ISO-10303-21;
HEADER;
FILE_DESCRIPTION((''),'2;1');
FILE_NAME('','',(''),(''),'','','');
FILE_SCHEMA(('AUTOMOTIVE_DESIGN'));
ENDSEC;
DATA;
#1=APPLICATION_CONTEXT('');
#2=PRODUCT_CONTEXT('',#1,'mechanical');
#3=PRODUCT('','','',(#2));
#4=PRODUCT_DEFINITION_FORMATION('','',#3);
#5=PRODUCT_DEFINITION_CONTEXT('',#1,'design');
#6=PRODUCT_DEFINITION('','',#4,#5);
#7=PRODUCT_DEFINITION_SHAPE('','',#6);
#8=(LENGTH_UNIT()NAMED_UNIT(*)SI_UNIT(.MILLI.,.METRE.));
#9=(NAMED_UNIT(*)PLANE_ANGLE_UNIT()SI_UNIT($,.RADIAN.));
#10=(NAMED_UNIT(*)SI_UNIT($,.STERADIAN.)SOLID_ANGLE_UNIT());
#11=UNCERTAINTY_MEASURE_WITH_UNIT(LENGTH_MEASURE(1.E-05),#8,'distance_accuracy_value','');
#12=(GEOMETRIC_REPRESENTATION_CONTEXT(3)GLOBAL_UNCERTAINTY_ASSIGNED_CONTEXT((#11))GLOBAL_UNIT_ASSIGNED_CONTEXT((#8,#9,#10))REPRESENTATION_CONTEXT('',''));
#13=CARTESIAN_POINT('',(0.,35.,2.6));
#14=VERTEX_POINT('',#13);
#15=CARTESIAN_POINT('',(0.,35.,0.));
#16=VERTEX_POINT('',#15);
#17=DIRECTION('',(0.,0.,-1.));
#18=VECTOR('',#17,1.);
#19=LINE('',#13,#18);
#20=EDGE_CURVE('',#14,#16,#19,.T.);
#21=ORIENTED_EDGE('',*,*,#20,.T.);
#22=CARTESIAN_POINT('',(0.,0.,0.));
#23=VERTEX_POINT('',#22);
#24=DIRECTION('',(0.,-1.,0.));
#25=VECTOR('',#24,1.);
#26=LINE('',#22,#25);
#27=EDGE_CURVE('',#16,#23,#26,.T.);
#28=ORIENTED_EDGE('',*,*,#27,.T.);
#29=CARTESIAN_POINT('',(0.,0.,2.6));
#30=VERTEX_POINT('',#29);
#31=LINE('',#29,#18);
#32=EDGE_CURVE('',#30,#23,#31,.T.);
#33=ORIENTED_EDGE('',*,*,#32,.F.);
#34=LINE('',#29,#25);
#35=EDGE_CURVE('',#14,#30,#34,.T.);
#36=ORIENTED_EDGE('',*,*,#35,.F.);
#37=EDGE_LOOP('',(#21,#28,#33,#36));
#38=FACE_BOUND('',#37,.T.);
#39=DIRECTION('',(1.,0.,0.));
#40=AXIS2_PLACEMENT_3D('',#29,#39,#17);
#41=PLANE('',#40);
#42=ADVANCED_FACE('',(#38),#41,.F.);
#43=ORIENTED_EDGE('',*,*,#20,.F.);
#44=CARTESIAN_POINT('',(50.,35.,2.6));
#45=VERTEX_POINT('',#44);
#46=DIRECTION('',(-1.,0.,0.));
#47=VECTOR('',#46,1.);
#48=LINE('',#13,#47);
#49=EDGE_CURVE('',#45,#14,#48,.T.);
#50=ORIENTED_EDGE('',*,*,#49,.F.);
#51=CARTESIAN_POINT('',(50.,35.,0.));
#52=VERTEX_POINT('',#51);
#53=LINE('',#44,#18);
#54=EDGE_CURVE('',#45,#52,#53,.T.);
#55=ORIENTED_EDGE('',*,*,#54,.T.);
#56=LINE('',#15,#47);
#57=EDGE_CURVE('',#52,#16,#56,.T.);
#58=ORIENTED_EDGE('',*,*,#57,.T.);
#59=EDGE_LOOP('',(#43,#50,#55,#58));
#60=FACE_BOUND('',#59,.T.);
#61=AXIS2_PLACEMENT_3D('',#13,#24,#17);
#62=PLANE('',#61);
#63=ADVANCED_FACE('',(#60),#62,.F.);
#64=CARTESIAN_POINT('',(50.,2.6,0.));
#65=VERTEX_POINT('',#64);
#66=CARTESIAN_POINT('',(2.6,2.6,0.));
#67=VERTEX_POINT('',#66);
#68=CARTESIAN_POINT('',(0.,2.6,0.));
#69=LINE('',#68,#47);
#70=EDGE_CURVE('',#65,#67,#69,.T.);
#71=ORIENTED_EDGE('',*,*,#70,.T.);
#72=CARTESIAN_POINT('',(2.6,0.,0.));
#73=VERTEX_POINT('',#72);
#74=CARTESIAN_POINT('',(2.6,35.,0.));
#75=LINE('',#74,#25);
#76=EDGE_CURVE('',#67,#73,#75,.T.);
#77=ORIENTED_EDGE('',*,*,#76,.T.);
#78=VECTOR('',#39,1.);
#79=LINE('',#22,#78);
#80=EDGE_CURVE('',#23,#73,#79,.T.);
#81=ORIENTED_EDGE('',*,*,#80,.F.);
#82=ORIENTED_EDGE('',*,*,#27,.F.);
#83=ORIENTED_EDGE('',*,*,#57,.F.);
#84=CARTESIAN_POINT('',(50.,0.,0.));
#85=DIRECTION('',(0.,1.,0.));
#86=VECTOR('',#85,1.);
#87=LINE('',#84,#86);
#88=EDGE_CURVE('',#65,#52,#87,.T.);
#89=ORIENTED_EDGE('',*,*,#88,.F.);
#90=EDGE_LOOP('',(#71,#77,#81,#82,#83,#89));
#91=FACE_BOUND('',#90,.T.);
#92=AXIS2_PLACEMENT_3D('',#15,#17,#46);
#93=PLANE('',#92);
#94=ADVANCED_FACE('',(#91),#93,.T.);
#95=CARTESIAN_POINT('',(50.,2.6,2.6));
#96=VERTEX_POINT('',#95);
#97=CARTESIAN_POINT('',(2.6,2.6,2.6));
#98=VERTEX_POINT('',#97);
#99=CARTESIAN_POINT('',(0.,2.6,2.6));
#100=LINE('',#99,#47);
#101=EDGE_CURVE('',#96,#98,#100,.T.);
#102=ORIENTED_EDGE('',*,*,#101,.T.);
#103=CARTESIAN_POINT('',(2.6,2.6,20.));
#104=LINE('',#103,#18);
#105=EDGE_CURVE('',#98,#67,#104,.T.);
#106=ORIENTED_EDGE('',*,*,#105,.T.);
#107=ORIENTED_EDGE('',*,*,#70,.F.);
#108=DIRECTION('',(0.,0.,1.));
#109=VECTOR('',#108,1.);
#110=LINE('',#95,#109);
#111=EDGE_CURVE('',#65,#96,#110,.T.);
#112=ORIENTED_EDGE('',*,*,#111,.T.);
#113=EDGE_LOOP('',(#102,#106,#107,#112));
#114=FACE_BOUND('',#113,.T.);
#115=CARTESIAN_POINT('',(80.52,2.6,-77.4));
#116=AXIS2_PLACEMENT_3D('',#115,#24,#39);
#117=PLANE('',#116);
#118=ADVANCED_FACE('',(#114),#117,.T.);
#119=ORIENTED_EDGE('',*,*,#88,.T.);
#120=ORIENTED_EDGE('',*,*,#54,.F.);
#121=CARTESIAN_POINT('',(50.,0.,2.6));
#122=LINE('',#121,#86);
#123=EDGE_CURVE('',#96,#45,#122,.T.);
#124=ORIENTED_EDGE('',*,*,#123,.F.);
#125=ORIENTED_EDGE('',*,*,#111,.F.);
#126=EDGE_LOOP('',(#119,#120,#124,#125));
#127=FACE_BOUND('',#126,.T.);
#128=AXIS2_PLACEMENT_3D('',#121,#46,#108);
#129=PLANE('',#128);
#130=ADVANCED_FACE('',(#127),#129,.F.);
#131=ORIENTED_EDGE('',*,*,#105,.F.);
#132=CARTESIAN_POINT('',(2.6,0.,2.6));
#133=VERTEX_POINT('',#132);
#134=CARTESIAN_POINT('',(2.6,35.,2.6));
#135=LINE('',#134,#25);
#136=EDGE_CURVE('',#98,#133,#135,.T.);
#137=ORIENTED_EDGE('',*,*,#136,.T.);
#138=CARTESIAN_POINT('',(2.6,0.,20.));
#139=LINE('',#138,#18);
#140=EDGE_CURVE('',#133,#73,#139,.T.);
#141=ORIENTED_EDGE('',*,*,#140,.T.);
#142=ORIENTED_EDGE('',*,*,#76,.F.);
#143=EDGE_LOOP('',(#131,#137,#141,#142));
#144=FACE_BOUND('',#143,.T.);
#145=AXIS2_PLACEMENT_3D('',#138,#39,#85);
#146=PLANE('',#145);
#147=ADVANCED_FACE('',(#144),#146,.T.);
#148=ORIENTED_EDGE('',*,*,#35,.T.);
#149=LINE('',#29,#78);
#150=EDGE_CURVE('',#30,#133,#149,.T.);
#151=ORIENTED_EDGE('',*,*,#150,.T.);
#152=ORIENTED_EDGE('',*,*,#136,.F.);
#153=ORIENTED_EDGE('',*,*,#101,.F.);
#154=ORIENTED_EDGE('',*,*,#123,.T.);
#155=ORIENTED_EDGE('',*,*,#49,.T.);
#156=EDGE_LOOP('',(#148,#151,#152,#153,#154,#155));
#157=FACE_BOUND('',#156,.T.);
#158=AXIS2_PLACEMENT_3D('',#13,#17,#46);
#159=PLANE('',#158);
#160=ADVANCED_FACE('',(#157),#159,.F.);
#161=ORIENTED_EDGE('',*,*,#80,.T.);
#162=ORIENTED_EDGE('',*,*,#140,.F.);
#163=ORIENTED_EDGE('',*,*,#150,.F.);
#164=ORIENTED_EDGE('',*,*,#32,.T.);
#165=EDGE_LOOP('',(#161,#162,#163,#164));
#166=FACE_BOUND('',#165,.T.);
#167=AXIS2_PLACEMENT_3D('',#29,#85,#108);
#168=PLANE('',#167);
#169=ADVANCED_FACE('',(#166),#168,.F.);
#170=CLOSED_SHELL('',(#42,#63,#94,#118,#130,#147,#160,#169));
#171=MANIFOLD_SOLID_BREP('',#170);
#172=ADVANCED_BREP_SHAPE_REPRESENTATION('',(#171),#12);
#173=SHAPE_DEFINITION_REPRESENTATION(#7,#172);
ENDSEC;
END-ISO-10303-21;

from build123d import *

# Parameters (mm, degrees)
SKETCH1_W           = 50
SKETCH1_H           = 35
BOSS_EXTRUDE1_DEPTH = 2.6
CAVITY1_OUTLINE_W   = 47.4
CAVITY1_OUTLINE_H   = 2.6
CAVITY1_DEPTH       = 2.6


# Read off the part's stored shape, not the designer's step: Cavity1
with BuildPart() as part:
    # Sketch1 → Boss-Extrude1 (new body)
    with BuildSketch(Plane.XY):
        with Locations((25, 17.5)):
            Rectangle(SKETCH1_W, SKETCH1_H)
    extrude(amount=BOSS_EXTRUDE1_DEPTH)

    # Cavity1 outline → Cavity1 (cut)
    with BuildSketch(Plane(origin=(0, 0, 0), x_dir=(1, 0, 0), z_dir=(0, 1, 0))):
        with Locations((26.3, -1.3)):
            Rectangle(CAVITY1_OUTLINE_W, CAVITY1_OUTLINE_H)
    extrude(amount=CAVITY1_DEPTH, mode=Mode.SUBTRACT)


solid = part.part
